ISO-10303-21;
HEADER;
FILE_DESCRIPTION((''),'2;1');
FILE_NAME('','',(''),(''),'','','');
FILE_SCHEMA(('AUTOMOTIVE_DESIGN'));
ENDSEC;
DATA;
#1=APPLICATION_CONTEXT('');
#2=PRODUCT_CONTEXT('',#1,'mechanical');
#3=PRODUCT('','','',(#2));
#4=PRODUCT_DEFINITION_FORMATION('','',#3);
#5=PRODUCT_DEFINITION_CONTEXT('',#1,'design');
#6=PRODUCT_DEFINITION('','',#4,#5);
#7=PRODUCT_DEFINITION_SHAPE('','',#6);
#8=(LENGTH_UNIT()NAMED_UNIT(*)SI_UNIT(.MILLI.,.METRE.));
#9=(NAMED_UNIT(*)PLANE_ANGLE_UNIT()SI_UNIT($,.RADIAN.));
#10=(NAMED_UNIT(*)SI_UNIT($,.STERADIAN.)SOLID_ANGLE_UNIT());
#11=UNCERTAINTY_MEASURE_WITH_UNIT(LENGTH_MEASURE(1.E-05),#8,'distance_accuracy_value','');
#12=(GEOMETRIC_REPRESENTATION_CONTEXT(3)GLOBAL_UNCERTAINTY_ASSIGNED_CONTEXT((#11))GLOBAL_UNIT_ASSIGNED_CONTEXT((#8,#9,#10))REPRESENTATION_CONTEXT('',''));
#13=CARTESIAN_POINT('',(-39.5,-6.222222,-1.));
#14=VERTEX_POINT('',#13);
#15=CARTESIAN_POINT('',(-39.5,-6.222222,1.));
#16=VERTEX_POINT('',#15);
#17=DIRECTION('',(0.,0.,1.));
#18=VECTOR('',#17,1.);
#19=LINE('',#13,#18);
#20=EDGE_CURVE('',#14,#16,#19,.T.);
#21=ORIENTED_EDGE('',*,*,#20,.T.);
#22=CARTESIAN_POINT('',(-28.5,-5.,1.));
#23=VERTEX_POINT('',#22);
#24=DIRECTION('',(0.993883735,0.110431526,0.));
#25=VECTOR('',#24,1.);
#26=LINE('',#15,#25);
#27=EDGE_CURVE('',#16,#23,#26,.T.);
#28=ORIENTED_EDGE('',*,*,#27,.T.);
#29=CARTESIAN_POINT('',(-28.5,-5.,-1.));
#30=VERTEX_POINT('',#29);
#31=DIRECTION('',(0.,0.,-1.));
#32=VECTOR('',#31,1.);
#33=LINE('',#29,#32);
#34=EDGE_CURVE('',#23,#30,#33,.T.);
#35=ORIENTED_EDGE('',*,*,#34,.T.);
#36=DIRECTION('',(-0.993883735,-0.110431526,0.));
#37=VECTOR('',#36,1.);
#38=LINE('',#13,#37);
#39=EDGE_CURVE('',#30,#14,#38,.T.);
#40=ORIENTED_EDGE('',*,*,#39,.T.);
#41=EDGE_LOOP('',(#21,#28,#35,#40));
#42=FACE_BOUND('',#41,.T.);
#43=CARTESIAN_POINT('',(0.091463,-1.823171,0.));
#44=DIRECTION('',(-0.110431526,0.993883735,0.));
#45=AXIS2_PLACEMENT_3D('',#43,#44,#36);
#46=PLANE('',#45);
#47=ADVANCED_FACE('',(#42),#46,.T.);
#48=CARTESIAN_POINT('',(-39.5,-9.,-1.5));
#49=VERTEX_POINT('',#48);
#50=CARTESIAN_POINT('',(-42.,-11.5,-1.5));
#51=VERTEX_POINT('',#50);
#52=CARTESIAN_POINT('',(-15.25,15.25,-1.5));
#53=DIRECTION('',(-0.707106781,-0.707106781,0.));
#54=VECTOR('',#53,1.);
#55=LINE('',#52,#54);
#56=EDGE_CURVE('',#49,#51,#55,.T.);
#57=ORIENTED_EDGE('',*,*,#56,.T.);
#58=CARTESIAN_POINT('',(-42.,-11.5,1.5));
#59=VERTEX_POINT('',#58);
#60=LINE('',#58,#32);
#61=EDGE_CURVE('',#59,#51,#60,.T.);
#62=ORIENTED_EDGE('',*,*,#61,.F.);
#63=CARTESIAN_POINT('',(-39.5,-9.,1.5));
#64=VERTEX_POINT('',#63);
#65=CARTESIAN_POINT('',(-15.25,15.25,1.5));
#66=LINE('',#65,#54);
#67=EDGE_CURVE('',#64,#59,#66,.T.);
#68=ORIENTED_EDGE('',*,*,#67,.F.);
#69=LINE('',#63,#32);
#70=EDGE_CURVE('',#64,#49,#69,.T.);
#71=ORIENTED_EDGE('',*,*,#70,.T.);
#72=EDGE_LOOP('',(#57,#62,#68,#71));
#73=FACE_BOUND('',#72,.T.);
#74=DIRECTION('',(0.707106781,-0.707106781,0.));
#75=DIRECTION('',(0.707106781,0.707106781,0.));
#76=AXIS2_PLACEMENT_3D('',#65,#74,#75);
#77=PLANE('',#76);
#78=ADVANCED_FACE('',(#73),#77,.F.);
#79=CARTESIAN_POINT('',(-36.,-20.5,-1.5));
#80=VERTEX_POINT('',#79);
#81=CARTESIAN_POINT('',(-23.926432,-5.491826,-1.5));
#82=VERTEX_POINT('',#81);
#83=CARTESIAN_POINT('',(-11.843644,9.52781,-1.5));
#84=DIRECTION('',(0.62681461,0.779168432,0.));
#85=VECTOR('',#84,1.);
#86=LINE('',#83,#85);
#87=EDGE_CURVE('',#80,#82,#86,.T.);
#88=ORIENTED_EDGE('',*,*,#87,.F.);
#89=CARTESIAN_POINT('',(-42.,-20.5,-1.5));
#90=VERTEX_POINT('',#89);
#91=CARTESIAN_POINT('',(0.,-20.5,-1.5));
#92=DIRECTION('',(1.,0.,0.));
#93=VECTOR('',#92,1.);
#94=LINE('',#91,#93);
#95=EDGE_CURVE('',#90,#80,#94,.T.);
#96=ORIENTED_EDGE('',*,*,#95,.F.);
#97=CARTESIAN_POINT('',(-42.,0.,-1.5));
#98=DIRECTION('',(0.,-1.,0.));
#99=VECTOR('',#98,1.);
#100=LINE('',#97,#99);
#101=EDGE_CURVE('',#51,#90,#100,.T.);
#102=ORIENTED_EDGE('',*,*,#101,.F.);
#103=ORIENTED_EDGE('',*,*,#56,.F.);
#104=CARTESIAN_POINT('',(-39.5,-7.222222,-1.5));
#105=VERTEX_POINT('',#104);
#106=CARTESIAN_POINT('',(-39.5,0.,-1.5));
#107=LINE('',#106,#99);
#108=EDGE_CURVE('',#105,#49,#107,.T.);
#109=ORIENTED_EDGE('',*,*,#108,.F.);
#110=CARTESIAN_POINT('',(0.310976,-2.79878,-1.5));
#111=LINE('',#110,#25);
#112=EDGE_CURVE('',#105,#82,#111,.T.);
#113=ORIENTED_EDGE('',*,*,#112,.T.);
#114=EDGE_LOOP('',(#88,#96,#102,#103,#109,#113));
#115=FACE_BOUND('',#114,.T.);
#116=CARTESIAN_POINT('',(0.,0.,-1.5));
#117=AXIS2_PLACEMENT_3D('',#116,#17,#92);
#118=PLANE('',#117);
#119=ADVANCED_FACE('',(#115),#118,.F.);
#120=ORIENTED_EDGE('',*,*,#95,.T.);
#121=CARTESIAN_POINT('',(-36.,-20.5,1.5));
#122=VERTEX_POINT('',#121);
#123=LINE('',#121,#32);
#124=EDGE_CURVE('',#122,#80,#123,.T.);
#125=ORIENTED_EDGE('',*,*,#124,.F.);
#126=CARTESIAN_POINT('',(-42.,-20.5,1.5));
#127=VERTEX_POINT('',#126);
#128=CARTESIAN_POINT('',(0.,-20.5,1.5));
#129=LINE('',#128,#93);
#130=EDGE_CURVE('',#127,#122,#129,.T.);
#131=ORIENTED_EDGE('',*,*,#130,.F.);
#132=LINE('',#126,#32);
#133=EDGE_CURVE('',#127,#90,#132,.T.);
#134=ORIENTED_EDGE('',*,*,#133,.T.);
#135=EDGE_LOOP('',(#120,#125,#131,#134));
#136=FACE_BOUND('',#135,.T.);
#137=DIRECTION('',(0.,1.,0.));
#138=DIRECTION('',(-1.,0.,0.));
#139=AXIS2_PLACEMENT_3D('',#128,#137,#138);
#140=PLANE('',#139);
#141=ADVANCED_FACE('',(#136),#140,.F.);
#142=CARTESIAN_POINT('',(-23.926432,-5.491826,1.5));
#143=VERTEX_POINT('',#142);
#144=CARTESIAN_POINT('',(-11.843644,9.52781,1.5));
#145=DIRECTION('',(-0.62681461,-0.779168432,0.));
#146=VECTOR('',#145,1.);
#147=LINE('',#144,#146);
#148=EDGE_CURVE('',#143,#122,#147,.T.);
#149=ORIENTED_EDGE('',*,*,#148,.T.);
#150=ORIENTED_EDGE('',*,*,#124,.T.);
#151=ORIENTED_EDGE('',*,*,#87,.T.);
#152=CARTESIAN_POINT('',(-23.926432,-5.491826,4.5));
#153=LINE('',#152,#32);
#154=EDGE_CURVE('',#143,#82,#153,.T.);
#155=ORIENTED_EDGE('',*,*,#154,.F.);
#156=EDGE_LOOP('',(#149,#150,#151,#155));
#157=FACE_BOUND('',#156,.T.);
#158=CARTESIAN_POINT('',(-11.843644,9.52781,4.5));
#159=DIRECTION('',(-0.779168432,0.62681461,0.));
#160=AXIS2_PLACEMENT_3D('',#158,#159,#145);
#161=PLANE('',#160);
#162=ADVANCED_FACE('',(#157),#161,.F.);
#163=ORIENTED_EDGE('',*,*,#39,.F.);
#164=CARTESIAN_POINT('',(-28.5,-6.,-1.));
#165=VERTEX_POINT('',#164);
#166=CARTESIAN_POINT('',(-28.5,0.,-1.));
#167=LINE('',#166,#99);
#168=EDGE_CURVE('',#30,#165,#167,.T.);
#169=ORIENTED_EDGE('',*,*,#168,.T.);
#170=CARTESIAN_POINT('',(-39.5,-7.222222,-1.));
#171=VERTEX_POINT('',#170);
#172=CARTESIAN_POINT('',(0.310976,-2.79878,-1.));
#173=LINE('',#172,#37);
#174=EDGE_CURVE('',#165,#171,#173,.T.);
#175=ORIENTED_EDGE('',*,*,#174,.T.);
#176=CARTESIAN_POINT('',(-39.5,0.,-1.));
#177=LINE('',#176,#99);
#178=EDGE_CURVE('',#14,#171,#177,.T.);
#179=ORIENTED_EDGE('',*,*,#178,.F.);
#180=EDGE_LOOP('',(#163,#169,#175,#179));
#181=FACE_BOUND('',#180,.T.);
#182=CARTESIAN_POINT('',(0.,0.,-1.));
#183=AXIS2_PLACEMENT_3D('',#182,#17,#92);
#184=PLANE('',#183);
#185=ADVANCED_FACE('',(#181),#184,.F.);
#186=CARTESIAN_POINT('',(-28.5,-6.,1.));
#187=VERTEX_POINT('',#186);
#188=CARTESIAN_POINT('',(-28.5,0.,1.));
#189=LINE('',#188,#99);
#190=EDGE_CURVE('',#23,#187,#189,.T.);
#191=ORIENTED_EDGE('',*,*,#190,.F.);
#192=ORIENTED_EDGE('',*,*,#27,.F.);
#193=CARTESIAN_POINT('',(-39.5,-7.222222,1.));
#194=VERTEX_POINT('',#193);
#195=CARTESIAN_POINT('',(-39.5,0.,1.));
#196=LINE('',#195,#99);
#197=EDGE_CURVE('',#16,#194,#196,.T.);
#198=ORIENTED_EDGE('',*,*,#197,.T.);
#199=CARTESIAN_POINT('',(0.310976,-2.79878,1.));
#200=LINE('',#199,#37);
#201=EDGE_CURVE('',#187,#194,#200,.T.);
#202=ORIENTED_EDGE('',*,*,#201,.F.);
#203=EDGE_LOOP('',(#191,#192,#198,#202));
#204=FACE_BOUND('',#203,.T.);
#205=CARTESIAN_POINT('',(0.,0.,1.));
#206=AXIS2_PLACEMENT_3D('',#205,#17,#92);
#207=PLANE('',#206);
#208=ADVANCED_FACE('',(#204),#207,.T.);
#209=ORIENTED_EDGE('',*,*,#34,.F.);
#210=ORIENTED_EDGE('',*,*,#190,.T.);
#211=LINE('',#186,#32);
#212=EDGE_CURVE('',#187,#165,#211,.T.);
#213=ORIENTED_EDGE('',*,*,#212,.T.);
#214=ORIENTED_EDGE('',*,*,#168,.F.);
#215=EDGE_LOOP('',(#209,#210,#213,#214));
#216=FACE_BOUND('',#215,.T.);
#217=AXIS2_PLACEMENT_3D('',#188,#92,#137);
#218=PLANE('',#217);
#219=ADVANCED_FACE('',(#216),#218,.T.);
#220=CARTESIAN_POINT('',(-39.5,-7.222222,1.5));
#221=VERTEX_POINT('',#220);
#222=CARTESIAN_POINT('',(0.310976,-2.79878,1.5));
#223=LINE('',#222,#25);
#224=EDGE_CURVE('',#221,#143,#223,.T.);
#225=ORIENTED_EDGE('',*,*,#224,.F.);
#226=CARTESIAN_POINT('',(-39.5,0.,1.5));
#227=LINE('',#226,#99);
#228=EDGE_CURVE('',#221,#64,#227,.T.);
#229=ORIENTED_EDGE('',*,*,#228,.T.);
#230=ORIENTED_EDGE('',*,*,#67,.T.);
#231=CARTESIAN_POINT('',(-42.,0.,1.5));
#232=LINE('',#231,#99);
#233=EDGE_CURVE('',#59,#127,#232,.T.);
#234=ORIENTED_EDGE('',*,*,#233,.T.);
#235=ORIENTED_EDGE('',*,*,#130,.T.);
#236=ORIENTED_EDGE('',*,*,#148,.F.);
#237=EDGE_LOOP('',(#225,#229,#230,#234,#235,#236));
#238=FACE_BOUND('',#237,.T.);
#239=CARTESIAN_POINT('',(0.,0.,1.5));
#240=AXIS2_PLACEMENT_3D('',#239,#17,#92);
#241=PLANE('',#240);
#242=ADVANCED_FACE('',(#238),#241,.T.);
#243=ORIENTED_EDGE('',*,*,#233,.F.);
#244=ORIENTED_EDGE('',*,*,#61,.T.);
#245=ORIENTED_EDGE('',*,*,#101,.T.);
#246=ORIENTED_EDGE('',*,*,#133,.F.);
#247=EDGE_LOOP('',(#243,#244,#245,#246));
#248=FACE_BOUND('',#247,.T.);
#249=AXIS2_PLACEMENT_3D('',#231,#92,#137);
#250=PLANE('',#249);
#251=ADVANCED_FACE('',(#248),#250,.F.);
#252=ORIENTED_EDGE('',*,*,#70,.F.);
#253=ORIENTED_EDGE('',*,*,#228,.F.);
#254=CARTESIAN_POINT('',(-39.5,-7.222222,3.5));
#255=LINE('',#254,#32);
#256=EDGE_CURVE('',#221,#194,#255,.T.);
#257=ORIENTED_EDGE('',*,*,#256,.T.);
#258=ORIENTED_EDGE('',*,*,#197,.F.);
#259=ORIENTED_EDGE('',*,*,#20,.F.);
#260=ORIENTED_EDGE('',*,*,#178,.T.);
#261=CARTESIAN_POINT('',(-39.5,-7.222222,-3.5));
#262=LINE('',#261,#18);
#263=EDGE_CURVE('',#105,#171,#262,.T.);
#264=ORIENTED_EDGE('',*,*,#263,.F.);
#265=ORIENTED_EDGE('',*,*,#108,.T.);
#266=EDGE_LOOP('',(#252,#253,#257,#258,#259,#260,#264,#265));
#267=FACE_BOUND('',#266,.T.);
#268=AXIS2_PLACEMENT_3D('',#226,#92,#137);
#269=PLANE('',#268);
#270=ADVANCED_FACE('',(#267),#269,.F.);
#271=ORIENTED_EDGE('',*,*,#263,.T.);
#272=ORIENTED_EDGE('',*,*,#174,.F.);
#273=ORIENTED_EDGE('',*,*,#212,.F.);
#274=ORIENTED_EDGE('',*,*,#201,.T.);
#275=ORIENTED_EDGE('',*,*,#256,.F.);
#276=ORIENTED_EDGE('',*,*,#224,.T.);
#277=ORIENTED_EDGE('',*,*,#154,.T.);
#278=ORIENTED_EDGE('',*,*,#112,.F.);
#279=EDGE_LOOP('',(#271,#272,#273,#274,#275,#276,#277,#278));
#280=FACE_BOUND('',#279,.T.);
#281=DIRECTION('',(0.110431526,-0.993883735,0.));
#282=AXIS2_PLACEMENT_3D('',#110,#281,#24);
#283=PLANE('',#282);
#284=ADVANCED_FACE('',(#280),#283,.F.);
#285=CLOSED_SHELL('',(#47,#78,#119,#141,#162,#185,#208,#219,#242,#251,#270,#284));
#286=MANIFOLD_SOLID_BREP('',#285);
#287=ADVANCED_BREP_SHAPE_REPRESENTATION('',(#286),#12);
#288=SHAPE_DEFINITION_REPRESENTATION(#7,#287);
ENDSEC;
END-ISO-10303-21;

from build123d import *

# Parameters (mm, degrees)
BOSS_EXTRUDE1_DEPTH      = 1.5
SKETCH1_4_W              = 11
SKETCH1_4_H              = 2
BOSS_EXTRUDE2_DEPTH      = 1
BOSS_EXTRUDE3_DEPTH      = 0.5
BOSS_EXTRUDE3_DEPTH_BACK = 2.5
CUT_EXTRUDE1_DEPTH       = 2.5
CUT_EXTRUDE2_START       = -2
CUT_EXTRUDE2_DEPTH       = 2.5
CUT_EXTRUDE3_DEPTH       = 10
SKETCH5_W                = 11.067692947
SKETCH5_H                = 2
CUT_EXTRUDE4_DEPTH       = 1
CUT_EXTRUDE5_DEPTH       = 6
CUT_EXTRUDE6_DEPTH       = 6


with BuildPart() as part:
    # Sketch1 → Boss-Extrude1 (new, symmetric)
    with BuildSketch(Plane.XY):
        Polygon((-28.5, -6), (-39.5, -6), (-39.5, -9), (-42, -11.5), (-42, -20.5), (-36, -20.5), (-24.008925726, -8.508925726), (-21.5, -6), align=None)
    extrude(amount=BOSS_EXTRUDE1_DEPTH, both=True)

    # Sketch1<4> → Boss-Extrude2 (add, symmetric)
    with BuildSketch(Plane.XY):
        with Locations((-34, -5)):
            Rectangle(SKETCH1_4_W, SKETCH1_4_H)
    extrude(amount=BOSS_EXTRUDE2_DEPTH, both=True)

    # Sketch2 → Boss-Extrude3 (add, two sides: drawn at the far end of the back side and taken through both)
    with BuildSketch(Plane(origin=(0, 0, -1), x_dir=(-1, 0, 0), z_dir=(0, 0, -1)).offset(-BOSS_EXTRUDE3_DEPTH_BACK)):
        Polygon((21.5, -6), (28.5, -6), (20.625, -5.125), align=None)
    extrude(amount=BOSS_EXTRUDE3_DEPTH + BOSS_EXTRUDE3_DEPTH_BACK)

    # Sketch2<3> → Cut-Extrude1 (cut)
    with BuildSketch(Plane(origin=(0, 0, -1), x_dir=(-1, 0, 0), z_dir=(0, 0, -1))):
        Polygon((39.5, -7.222222222), (39.5, -6), (28.5, -6), align=None)
    extrude(amount=CUT_EXTRUDE1_DEPTH, mode=Mode.SUBTRACT)

    # Sketch2<4> → Cut-Extrude2 (cut)
    with BuildSketch(Plane(origin=(0, 0, -1), x_dir=(-1, 0, 0), z_dir=(0, 0, -1)).offset(CUT_EXTRUDE2_START)):
        Polygon((39.5, -7.222222222), (39.5, -6), (28.5, -6), align=None)
    extrude(amount=-CUT_EXTRUDE2_DEPTH, mode=Mode.SUBTRACT)

    # Sketch3 → Cut-Extrude3 (cut)
    with BuildSketch(Plane(origin=(0, 0, -1), x_dir=(-1, 0, 0), z_dir=(0, 0, -1))):
        Polygon((28.5, -4), (39.5, -5.222222222), (39.5, -4), align=None)
    extrude(amount=-CUT_EXTRUDE3_DEPTH, mode=Mode.SUBTRACT)

    # Sketch5 → Cut-Extrude4 (cut, along a direction that is not the sketch's normal)
    with BuildSketch(Plane(origin=(0.091463415, -0.823170732, 0), x_dir=(0.993883734673619, 0.11043152607484619, 0), z_dir=(-0.11043152607484619, 0.993883734673619, 0))):
        with Locations((-34.301259016, 0)):
            Rectangle(SKETCH5_W, SKETCH5_H)
    extrude(amount=-CUT_EXTRUDE4_DEPTH, dir=(0, 1, 0), mode=Mode.SUBTRACT)

    # Sketch6 → Cut-Extrude5 (cut)
    with BuildSketch(Plane(origin=(0, 0, -1.5), x_dir=(-1, 0, 0), z_dir=(0, 0, -1))):
        Polygon((22.46223447, -5.329137163), (22.29892474, -6.79892474), (20.531436433, -7.019526438), (20.056691247, -4.979132235), (21.915268146, -4.302367821), align=None)
    extrude(amount=-CUT_EXTRUDE5_DEPTH, mode=Mode.SUBTRACT)

    # Sketch7 → Cut-Extrude6 (cut)
    with BuildSketch(Plane(origin=(0, 0, -1.5), x_dir=(-1, 0, 0), z_dir=(0, 0, -1))):
        Polygon((22.29892474, -6.79892474), (36, -20.5), (23.926432251, -5.491825806), (22.46223447, -5.329137163), align=None)
    extrude(amount=-CUT_EXTRUDE6_DEPTH, mode=Mode.SUBTRACT)


solid = part.part
